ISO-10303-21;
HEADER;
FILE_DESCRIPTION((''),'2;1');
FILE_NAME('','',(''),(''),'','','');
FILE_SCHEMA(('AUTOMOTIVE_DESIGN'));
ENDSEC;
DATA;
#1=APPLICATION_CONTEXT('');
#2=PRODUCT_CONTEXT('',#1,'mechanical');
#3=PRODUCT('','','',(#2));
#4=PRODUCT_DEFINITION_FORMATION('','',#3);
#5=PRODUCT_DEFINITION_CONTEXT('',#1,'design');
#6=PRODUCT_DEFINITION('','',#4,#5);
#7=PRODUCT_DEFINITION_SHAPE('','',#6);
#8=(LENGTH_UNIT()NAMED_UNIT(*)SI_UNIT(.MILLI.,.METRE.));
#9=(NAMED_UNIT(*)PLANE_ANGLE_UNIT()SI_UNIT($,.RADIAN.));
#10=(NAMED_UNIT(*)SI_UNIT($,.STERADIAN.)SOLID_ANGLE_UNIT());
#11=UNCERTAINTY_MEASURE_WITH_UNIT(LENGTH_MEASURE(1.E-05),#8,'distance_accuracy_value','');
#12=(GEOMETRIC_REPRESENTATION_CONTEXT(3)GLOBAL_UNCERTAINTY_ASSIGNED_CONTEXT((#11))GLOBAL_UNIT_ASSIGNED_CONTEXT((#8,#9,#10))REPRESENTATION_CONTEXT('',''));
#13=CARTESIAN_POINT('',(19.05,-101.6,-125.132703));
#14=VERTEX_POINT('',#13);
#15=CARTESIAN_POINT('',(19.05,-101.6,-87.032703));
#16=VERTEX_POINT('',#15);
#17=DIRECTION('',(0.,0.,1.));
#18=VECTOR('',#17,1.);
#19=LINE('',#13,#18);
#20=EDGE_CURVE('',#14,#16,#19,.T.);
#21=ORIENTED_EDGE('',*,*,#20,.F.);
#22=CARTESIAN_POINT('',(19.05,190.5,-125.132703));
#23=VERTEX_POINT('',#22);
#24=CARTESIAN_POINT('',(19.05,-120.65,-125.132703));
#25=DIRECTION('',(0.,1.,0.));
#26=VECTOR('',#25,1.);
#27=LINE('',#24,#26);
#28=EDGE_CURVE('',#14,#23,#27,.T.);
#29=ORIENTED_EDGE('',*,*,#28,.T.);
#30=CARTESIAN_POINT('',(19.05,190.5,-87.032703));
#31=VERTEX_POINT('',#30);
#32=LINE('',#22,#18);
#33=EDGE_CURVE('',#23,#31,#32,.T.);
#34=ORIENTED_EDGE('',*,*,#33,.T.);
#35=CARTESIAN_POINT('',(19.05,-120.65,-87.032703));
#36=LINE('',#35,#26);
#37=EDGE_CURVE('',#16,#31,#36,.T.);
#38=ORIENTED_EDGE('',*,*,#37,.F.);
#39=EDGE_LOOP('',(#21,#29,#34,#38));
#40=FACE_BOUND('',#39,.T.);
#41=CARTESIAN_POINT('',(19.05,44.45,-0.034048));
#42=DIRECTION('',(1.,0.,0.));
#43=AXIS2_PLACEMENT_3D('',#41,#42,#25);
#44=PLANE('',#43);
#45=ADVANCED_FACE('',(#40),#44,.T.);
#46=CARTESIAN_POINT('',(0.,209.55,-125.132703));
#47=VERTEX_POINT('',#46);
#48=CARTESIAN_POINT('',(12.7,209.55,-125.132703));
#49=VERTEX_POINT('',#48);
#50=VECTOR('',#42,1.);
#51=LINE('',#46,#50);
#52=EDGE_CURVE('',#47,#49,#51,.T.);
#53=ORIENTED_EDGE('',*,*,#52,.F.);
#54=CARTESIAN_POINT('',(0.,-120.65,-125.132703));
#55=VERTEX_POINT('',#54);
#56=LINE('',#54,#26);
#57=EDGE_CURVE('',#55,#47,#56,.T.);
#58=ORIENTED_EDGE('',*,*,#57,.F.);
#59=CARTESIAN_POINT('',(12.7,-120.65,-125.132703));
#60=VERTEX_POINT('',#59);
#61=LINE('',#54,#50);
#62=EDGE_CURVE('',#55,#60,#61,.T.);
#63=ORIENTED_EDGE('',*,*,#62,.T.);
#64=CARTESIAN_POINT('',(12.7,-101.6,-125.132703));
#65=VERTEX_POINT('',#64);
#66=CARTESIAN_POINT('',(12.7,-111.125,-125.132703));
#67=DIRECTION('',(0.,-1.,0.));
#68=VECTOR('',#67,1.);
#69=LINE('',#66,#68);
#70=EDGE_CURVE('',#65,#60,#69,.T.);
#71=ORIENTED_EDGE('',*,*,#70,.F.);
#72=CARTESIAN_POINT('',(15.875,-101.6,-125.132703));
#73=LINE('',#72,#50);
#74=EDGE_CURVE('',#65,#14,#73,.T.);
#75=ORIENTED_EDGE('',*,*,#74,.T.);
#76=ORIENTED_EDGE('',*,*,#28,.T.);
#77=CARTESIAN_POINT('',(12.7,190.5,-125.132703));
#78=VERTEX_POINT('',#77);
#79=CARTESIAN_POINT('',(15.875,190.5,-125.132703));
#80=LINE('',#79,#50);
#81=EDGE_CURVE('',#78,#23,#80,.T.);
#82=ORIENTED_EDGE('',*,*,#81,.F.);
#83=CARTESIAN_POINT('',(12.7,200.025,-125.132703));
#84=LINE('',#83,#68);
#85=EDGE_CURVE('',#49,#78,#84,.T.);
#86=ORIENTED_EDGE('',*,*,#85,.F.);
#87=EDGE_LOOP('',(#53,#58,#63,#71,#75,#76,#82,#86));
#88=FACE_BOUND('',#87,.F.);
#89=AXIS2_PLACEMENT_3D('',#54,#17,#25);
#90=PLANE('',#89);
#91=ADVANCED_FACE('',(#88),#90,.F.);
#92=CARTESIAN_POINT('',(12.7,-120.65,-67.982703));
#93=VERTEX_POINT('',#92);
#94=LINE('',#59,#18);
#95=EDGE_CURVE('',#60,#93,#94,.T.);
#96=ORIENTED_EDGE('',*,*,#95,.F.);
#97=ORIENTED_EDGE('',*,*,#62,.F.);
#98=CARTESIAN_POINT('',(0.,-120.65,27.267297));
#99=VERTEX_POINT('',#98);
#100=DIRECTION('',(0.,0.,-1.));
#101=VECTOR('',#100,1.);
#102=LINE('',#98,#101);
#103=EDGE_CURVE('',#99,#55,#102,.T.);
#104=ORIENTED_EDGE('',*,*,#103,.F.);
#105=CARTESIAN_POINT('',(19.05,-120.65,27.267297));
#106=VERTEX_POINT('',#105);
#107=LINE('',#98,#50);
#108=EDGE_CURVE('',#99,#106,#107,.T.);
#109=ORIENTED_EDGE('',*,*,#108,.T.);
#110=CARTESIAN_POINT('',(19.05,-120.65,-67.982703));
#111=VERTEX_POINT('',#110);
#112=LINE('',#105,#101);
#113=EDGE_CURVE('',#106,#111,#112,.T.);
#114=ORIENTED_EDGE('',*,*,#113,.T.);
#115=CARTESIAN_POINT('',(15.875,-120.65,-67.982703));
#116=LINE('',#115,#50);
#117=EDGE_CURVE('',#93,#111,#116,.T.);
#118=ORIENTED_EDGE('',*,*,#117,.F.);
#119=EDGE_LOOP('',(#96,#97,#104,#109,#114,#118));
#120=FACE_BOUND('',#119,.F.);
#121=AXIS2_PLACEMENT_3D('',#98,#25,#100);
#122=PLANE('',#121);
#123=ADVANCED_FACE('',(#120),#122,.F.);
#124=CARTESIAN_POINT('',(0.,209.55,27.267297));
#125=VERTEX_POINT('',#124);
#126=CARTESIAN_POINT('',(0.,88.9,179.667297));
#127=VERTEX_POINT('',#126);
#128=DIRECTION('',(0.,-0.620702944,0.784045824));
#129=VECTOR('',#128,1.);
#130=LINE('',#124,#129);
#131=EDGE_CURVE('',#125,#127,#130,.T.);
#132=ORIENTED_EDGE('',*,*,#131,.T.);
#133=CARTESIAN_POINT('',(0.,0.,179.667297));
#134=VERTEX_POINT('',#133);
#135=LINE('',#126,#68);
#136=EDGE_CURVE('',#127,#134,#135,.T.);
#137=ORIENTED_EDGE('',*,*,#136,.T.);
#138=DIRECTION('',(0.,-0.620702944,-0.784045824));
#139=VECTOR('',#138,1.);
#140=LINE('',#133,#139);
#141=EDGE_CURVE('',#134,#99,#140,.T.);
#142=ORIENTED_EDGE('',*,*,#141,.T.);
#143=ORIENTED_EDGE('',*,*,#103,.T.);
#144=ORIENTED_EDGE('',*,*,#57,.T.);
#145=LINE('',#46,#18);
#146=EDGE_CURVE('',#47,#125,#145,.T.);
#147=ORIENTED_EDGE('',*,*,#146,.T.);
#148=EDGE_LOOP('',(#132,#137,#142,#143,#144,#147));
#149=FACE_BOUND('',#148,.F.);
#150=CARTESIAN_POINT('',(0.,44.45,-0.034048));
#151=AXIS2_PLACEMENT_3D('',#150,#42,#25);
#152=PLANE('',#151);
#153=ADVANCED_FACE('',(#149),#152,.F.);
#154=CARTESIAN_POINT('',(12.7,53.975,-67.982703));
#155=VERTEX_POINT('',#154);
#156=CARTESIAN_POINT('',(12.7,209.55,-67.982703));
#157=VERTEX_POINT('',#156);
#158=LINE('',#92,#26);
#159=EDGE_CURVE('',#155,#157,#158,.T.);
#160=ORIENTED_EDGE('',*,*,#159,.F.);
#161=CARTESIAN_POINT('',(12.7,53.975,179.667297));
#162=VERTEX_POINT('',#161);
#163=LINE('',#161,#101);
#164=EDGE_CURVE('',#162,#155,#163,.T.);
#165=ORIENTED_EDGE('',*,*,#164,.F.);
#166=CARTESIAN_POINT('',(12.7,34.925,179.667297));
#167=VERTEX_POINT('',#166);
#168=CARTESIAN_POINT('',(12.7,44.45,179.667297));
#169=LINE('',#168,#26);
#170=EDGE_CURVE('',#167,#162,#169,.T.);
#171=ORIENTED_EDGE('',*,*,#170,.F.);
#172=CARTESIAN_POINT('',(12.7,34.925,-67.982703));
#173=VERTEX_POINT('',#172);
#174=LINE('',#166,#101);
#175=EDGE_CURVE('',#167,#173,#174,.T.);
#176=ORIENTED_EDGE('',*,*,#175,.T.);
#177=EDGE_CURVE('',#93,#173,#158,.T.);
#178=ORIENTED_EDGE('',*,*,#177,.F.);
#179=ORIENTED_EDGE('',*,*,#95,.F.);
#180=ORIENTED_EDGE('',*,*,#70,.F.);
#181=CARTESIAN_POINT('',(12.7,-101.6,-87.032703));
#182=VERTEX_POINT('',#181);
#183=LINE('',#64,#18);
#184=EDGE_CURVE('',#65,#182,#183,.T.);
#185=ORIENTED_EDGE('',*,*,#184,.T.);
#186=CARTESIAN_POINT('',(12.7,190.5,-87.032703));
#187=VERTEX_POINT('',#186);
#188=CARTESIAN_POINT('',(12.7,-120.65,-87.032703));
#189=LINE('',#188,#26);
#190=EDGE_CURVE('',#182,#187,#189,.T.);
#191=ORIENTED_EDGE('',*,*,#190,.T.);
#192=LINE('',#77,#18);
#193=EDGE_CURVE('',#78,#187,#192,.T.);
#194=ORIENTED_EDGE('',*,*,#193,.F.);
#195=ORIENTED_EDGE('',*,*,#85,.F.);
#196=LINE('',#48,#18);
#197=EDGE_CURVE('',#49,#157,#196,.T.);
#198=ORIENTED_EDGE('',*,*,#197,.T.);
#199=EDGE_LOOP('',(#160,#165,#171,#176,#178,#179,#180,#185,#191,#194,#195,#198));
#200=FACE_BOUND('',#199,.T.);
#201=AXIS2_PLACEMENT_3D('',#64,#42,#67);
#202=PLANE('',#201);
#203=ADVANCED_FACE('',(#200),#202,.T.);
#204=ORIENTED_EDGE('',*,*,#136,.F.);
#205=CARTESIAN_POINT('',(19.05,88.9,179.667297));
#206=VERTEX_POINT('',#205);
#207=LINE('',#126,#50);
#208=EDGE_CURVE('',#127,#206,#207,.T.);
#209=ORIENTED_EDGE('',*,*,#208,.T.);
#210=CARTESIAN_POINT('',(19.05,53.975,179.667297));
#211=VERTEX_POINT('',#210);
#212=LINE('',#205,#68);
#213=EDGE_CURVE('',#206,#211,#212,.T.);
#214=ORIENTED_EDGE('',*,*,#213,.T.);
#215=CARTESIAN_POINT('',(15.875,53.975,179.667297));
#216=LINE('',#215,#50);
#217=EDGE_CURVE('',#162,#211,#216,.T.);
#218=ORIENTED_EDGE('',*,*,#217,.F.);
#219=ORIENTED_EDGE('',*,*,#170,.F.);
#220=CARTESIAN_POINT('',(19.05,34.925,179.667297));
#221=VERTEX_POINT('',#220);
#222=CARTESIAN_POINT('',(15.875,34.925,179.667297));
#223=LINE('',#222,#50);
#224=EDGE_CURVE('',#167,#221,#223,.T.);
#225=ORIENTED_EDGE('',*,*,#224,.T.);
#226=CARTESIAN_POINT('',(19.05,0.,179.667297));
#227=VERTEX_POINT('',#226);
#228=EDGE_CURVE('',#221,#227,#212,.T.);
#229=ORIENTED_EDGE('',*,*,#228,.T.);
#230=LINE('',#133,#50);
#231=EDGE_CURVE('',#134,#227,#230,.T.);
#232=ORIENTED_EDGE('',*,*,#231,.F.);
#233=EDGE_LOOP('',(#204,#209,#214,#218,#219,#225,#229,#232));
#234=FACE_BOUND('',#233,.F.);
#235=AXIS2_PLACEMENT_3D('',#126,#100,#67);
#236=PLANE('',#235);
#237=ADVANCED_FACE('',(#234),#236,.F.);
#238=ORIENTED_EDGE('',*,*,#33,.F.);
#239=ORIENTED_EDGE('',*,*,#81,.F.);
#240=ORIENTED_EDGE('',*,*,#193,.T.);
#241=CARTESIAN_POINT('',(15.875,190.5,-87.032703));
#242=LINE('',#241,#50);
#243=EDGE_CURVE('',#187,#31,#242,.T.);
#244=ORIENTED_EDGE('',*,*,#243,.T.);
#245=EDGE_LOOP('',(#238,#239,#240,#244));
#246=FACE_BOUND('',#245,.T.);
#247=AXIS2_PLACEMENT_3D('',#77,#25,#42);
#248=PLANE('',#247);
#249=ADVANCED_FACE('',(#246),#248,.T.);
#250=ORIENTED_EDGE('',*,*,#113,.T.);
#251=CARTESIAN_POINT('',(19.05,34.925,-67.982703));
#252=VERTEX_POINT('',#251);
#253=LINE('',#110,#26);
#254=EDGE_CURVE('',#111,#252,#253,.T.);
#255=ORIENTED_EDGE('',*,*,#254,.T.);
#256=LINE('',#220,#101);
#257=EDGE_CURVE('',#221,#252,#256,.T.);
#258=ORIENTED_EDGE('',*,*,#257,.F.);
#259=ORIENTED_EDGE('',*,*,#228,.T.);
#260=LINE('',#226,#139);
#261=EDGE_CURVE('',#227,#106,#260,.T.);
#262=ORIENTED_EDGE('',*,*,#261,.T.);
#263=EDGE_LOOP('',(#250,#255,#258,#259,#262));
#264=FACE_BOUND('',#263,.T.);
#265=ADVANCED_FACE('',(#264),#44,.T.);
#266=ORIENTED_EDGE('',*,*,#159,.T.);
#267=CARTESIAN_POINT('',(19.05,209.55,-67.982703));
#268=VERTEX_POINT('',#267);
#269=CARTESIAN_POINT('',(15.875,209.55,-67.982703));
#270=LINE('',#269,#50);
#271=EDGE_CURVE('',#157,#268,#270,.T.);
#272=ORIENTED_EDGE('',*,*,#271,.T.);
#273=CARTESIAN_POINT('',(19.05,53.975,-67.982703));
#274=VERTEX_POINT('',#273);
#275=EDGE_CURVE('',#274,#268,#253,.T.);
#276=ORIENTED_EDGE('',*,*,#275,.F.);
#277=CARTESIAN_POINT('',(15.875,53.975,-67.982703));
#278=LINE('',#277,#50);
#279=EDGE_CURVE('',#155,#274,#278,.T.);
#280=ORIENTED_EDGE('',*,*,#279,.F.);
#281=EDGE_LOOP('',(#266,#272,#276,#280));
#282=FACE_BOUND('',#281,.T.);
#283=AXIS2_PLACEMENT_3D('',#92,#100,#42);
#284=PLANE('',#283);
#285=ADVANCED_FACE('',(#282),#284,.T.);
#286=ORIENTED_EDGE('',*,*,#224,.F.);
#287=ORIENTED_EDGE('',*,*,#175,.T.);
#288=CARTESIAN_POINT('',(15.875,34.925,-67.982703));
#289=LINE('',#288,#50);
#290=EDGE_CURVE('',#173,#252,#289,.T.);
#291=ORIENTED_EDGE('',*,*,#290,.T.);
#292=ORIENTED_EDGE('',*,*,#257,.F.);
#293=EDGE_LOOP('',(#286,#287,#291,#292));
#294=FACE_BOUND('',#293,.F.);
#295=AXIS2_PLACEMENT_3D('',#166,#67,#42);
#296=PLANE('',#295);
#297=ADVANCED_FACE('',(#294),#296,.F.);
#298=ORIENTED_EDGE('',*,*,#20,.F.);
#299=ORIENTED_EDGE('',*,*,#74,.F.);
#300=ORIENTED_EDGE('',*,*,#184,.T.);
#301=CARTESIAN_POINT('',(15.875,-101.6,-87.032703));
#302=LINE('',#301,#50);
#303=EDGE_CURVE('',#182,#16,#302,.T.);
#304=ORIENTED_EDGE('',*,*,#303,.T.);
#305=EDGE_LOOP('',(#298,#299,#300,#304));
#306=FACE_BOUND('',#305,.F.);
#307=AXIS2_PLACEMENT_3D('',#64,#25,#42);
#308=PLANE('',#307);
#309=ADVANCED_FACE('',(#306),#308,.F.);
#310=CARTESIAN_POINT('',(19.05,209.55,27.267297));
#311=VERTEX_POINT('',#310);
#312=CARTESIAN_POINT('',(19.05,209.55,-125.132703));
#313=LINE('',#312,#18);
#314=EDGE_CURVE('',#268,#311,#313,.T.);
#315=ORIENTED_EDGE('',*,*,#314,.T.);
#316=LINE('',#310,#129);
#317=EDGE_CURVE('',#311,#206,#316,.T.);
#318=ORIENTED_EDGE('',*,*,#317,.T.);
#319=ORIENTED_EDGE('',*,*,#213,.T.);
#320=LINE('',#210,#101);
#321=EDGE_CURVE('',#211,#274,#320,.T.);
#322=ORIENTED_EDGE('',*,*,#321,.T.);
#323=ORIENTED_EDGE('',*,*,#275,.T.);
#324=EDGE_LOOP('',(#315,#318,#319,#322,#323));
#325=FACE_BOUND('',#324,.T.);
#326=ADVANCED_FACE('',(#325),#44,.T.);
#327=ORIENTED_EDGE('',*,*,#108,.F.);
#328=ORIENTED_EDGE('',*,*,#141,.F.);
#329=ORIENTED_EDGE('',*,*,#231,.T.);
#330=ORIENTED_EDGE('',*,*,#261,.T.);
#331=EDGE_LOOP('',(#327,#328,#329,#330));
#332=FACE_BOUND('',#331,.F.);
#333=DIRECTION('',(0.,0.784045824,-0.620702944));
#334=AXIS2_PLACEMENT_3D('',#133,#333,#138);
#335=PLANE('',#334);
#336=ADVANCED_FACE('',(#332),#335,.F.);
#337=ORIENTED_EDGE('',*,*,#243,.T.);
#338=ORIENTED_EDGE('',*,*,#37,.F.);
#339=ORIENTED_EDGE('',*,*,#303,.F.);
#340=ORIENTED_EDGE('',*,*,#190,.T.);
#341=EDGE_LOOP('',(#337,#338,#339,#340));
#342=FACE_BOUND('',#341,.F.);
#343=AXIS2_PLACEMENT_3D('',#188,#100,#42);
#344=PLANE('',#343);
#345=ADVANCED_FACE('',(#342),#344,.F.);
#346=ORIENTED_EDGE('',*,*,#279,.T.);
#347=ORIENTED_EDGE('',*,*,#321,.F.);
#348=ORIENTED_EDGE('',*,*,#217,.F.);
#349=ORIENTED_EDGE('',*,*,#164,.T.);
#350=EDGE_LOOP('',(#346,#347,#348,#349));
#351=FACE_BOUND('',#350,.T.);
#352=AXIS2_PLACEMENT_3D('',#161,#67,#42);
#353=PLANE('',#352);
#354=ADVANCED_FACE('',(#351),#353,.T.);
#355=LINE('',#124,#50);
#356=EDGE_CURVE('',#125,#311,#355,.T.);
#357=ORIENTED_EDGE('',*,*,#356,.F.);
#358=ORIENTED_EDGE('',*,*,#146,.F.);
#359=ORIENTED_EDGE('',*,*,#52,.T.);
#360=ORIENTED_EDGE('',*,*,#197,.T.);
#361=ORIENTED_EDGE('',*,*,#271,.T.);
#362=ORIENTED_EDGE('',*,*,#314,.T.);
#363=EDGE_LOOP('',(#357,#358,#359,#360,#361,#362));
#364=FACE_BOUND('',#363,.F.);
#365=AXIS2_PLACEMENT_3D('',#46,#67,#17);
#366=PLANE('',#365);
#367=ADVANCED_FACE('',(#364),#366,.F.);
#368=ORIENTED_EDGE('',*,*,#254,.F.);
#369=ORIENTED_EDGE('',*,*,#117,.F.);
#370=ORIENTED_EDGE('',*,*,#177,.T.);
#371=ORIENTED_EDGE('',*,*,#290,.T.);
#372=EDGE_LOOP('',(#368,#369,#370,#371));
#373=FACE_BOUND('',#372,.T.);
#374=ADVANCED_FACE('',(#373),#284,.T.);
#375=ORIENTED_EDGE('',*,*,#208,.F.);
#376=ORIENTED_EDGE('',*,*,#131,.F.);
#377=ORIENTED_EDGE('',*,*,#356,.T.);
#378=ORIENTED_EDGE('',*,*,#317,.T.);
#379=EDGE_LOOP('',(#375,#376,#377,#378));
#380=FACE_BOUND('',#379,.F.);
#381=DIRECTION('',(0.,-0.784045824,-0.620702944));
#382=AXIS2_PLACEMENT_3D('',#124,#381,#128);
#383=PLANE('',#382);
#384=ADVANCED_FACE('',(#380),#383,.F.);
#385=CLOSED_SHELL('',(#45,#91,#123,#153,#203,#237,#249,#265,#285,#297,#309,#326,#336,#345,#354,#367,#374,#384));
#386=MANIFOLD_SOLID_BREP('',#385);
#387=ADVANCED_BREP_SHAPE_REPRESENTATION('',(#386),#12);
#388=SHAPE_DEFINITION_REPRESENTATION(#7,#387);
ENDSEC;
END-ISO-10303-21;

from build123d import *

# Parameters (mm, degrees)
F1_DEPTH = 19.05
F2_W     = 6.35
F2_H     = 19.05
F3_DEPTH = 330.2
F4_W     = 6.35
F4_H     = 19.05
F5_DEPTH = 38.1
F6_W     = 6.35
F6_H     = 19.05
F7_DEPTH = 247.65


# Not quite as in the source:
# - a feature names something its author has since deleted; it is built from what else it names


with BuildPart() as f1:
    # F0 (on Right) → F1 (new body)
    with BuildSketch(Plane.YZ):
        Polygon((-120.65, 27.2672971964), (-120.65, -125.1327028036), (209.55, -125.1327028036), (209.55, 27.2672971964), (88.9, 179.6672971964), (0, 179.6672971964), align=None)
    extrude(amount=F1_DEPTH)

    # F2 (on face) → F3 (cut)
    with BuildSketch(Plane.XZ.offset(120.65)):
        with Locations((15.875, -77.5077028036)):
            Rectangle(F2_W, F2_H)
    extrude(amount=-F3_DEPTH, mode=Mode.SUBTRACT)

    # F4 (on face) → F5 (cut)
    with BuildSketch(Plane(origin=(0, 0, -125.1327028036), x_dir=(1, 0, 0), z_dir=(0, 0, -1))):
        with Locations((15.875, 111.125)):
            Rectangle(F4_W, F4_H)
        with Locations((15.875, -200.025)):
            Rectangle(F4_W, F4_H)
    extrude(amount=-F5_DEPTH, mode=Mode.SUBTRACT)

    # F6 (on face) → F7 (cut)
    with BuildSketch(Plane.XY.offset(179.6672971964)):
        with Locations((15.875, 44.45)):
            Rectangle(F6_W, F6_H)
    extrude(amount=-F7_DEPTH, mode=Mode.SUBTRACT)


solid = f1.part
